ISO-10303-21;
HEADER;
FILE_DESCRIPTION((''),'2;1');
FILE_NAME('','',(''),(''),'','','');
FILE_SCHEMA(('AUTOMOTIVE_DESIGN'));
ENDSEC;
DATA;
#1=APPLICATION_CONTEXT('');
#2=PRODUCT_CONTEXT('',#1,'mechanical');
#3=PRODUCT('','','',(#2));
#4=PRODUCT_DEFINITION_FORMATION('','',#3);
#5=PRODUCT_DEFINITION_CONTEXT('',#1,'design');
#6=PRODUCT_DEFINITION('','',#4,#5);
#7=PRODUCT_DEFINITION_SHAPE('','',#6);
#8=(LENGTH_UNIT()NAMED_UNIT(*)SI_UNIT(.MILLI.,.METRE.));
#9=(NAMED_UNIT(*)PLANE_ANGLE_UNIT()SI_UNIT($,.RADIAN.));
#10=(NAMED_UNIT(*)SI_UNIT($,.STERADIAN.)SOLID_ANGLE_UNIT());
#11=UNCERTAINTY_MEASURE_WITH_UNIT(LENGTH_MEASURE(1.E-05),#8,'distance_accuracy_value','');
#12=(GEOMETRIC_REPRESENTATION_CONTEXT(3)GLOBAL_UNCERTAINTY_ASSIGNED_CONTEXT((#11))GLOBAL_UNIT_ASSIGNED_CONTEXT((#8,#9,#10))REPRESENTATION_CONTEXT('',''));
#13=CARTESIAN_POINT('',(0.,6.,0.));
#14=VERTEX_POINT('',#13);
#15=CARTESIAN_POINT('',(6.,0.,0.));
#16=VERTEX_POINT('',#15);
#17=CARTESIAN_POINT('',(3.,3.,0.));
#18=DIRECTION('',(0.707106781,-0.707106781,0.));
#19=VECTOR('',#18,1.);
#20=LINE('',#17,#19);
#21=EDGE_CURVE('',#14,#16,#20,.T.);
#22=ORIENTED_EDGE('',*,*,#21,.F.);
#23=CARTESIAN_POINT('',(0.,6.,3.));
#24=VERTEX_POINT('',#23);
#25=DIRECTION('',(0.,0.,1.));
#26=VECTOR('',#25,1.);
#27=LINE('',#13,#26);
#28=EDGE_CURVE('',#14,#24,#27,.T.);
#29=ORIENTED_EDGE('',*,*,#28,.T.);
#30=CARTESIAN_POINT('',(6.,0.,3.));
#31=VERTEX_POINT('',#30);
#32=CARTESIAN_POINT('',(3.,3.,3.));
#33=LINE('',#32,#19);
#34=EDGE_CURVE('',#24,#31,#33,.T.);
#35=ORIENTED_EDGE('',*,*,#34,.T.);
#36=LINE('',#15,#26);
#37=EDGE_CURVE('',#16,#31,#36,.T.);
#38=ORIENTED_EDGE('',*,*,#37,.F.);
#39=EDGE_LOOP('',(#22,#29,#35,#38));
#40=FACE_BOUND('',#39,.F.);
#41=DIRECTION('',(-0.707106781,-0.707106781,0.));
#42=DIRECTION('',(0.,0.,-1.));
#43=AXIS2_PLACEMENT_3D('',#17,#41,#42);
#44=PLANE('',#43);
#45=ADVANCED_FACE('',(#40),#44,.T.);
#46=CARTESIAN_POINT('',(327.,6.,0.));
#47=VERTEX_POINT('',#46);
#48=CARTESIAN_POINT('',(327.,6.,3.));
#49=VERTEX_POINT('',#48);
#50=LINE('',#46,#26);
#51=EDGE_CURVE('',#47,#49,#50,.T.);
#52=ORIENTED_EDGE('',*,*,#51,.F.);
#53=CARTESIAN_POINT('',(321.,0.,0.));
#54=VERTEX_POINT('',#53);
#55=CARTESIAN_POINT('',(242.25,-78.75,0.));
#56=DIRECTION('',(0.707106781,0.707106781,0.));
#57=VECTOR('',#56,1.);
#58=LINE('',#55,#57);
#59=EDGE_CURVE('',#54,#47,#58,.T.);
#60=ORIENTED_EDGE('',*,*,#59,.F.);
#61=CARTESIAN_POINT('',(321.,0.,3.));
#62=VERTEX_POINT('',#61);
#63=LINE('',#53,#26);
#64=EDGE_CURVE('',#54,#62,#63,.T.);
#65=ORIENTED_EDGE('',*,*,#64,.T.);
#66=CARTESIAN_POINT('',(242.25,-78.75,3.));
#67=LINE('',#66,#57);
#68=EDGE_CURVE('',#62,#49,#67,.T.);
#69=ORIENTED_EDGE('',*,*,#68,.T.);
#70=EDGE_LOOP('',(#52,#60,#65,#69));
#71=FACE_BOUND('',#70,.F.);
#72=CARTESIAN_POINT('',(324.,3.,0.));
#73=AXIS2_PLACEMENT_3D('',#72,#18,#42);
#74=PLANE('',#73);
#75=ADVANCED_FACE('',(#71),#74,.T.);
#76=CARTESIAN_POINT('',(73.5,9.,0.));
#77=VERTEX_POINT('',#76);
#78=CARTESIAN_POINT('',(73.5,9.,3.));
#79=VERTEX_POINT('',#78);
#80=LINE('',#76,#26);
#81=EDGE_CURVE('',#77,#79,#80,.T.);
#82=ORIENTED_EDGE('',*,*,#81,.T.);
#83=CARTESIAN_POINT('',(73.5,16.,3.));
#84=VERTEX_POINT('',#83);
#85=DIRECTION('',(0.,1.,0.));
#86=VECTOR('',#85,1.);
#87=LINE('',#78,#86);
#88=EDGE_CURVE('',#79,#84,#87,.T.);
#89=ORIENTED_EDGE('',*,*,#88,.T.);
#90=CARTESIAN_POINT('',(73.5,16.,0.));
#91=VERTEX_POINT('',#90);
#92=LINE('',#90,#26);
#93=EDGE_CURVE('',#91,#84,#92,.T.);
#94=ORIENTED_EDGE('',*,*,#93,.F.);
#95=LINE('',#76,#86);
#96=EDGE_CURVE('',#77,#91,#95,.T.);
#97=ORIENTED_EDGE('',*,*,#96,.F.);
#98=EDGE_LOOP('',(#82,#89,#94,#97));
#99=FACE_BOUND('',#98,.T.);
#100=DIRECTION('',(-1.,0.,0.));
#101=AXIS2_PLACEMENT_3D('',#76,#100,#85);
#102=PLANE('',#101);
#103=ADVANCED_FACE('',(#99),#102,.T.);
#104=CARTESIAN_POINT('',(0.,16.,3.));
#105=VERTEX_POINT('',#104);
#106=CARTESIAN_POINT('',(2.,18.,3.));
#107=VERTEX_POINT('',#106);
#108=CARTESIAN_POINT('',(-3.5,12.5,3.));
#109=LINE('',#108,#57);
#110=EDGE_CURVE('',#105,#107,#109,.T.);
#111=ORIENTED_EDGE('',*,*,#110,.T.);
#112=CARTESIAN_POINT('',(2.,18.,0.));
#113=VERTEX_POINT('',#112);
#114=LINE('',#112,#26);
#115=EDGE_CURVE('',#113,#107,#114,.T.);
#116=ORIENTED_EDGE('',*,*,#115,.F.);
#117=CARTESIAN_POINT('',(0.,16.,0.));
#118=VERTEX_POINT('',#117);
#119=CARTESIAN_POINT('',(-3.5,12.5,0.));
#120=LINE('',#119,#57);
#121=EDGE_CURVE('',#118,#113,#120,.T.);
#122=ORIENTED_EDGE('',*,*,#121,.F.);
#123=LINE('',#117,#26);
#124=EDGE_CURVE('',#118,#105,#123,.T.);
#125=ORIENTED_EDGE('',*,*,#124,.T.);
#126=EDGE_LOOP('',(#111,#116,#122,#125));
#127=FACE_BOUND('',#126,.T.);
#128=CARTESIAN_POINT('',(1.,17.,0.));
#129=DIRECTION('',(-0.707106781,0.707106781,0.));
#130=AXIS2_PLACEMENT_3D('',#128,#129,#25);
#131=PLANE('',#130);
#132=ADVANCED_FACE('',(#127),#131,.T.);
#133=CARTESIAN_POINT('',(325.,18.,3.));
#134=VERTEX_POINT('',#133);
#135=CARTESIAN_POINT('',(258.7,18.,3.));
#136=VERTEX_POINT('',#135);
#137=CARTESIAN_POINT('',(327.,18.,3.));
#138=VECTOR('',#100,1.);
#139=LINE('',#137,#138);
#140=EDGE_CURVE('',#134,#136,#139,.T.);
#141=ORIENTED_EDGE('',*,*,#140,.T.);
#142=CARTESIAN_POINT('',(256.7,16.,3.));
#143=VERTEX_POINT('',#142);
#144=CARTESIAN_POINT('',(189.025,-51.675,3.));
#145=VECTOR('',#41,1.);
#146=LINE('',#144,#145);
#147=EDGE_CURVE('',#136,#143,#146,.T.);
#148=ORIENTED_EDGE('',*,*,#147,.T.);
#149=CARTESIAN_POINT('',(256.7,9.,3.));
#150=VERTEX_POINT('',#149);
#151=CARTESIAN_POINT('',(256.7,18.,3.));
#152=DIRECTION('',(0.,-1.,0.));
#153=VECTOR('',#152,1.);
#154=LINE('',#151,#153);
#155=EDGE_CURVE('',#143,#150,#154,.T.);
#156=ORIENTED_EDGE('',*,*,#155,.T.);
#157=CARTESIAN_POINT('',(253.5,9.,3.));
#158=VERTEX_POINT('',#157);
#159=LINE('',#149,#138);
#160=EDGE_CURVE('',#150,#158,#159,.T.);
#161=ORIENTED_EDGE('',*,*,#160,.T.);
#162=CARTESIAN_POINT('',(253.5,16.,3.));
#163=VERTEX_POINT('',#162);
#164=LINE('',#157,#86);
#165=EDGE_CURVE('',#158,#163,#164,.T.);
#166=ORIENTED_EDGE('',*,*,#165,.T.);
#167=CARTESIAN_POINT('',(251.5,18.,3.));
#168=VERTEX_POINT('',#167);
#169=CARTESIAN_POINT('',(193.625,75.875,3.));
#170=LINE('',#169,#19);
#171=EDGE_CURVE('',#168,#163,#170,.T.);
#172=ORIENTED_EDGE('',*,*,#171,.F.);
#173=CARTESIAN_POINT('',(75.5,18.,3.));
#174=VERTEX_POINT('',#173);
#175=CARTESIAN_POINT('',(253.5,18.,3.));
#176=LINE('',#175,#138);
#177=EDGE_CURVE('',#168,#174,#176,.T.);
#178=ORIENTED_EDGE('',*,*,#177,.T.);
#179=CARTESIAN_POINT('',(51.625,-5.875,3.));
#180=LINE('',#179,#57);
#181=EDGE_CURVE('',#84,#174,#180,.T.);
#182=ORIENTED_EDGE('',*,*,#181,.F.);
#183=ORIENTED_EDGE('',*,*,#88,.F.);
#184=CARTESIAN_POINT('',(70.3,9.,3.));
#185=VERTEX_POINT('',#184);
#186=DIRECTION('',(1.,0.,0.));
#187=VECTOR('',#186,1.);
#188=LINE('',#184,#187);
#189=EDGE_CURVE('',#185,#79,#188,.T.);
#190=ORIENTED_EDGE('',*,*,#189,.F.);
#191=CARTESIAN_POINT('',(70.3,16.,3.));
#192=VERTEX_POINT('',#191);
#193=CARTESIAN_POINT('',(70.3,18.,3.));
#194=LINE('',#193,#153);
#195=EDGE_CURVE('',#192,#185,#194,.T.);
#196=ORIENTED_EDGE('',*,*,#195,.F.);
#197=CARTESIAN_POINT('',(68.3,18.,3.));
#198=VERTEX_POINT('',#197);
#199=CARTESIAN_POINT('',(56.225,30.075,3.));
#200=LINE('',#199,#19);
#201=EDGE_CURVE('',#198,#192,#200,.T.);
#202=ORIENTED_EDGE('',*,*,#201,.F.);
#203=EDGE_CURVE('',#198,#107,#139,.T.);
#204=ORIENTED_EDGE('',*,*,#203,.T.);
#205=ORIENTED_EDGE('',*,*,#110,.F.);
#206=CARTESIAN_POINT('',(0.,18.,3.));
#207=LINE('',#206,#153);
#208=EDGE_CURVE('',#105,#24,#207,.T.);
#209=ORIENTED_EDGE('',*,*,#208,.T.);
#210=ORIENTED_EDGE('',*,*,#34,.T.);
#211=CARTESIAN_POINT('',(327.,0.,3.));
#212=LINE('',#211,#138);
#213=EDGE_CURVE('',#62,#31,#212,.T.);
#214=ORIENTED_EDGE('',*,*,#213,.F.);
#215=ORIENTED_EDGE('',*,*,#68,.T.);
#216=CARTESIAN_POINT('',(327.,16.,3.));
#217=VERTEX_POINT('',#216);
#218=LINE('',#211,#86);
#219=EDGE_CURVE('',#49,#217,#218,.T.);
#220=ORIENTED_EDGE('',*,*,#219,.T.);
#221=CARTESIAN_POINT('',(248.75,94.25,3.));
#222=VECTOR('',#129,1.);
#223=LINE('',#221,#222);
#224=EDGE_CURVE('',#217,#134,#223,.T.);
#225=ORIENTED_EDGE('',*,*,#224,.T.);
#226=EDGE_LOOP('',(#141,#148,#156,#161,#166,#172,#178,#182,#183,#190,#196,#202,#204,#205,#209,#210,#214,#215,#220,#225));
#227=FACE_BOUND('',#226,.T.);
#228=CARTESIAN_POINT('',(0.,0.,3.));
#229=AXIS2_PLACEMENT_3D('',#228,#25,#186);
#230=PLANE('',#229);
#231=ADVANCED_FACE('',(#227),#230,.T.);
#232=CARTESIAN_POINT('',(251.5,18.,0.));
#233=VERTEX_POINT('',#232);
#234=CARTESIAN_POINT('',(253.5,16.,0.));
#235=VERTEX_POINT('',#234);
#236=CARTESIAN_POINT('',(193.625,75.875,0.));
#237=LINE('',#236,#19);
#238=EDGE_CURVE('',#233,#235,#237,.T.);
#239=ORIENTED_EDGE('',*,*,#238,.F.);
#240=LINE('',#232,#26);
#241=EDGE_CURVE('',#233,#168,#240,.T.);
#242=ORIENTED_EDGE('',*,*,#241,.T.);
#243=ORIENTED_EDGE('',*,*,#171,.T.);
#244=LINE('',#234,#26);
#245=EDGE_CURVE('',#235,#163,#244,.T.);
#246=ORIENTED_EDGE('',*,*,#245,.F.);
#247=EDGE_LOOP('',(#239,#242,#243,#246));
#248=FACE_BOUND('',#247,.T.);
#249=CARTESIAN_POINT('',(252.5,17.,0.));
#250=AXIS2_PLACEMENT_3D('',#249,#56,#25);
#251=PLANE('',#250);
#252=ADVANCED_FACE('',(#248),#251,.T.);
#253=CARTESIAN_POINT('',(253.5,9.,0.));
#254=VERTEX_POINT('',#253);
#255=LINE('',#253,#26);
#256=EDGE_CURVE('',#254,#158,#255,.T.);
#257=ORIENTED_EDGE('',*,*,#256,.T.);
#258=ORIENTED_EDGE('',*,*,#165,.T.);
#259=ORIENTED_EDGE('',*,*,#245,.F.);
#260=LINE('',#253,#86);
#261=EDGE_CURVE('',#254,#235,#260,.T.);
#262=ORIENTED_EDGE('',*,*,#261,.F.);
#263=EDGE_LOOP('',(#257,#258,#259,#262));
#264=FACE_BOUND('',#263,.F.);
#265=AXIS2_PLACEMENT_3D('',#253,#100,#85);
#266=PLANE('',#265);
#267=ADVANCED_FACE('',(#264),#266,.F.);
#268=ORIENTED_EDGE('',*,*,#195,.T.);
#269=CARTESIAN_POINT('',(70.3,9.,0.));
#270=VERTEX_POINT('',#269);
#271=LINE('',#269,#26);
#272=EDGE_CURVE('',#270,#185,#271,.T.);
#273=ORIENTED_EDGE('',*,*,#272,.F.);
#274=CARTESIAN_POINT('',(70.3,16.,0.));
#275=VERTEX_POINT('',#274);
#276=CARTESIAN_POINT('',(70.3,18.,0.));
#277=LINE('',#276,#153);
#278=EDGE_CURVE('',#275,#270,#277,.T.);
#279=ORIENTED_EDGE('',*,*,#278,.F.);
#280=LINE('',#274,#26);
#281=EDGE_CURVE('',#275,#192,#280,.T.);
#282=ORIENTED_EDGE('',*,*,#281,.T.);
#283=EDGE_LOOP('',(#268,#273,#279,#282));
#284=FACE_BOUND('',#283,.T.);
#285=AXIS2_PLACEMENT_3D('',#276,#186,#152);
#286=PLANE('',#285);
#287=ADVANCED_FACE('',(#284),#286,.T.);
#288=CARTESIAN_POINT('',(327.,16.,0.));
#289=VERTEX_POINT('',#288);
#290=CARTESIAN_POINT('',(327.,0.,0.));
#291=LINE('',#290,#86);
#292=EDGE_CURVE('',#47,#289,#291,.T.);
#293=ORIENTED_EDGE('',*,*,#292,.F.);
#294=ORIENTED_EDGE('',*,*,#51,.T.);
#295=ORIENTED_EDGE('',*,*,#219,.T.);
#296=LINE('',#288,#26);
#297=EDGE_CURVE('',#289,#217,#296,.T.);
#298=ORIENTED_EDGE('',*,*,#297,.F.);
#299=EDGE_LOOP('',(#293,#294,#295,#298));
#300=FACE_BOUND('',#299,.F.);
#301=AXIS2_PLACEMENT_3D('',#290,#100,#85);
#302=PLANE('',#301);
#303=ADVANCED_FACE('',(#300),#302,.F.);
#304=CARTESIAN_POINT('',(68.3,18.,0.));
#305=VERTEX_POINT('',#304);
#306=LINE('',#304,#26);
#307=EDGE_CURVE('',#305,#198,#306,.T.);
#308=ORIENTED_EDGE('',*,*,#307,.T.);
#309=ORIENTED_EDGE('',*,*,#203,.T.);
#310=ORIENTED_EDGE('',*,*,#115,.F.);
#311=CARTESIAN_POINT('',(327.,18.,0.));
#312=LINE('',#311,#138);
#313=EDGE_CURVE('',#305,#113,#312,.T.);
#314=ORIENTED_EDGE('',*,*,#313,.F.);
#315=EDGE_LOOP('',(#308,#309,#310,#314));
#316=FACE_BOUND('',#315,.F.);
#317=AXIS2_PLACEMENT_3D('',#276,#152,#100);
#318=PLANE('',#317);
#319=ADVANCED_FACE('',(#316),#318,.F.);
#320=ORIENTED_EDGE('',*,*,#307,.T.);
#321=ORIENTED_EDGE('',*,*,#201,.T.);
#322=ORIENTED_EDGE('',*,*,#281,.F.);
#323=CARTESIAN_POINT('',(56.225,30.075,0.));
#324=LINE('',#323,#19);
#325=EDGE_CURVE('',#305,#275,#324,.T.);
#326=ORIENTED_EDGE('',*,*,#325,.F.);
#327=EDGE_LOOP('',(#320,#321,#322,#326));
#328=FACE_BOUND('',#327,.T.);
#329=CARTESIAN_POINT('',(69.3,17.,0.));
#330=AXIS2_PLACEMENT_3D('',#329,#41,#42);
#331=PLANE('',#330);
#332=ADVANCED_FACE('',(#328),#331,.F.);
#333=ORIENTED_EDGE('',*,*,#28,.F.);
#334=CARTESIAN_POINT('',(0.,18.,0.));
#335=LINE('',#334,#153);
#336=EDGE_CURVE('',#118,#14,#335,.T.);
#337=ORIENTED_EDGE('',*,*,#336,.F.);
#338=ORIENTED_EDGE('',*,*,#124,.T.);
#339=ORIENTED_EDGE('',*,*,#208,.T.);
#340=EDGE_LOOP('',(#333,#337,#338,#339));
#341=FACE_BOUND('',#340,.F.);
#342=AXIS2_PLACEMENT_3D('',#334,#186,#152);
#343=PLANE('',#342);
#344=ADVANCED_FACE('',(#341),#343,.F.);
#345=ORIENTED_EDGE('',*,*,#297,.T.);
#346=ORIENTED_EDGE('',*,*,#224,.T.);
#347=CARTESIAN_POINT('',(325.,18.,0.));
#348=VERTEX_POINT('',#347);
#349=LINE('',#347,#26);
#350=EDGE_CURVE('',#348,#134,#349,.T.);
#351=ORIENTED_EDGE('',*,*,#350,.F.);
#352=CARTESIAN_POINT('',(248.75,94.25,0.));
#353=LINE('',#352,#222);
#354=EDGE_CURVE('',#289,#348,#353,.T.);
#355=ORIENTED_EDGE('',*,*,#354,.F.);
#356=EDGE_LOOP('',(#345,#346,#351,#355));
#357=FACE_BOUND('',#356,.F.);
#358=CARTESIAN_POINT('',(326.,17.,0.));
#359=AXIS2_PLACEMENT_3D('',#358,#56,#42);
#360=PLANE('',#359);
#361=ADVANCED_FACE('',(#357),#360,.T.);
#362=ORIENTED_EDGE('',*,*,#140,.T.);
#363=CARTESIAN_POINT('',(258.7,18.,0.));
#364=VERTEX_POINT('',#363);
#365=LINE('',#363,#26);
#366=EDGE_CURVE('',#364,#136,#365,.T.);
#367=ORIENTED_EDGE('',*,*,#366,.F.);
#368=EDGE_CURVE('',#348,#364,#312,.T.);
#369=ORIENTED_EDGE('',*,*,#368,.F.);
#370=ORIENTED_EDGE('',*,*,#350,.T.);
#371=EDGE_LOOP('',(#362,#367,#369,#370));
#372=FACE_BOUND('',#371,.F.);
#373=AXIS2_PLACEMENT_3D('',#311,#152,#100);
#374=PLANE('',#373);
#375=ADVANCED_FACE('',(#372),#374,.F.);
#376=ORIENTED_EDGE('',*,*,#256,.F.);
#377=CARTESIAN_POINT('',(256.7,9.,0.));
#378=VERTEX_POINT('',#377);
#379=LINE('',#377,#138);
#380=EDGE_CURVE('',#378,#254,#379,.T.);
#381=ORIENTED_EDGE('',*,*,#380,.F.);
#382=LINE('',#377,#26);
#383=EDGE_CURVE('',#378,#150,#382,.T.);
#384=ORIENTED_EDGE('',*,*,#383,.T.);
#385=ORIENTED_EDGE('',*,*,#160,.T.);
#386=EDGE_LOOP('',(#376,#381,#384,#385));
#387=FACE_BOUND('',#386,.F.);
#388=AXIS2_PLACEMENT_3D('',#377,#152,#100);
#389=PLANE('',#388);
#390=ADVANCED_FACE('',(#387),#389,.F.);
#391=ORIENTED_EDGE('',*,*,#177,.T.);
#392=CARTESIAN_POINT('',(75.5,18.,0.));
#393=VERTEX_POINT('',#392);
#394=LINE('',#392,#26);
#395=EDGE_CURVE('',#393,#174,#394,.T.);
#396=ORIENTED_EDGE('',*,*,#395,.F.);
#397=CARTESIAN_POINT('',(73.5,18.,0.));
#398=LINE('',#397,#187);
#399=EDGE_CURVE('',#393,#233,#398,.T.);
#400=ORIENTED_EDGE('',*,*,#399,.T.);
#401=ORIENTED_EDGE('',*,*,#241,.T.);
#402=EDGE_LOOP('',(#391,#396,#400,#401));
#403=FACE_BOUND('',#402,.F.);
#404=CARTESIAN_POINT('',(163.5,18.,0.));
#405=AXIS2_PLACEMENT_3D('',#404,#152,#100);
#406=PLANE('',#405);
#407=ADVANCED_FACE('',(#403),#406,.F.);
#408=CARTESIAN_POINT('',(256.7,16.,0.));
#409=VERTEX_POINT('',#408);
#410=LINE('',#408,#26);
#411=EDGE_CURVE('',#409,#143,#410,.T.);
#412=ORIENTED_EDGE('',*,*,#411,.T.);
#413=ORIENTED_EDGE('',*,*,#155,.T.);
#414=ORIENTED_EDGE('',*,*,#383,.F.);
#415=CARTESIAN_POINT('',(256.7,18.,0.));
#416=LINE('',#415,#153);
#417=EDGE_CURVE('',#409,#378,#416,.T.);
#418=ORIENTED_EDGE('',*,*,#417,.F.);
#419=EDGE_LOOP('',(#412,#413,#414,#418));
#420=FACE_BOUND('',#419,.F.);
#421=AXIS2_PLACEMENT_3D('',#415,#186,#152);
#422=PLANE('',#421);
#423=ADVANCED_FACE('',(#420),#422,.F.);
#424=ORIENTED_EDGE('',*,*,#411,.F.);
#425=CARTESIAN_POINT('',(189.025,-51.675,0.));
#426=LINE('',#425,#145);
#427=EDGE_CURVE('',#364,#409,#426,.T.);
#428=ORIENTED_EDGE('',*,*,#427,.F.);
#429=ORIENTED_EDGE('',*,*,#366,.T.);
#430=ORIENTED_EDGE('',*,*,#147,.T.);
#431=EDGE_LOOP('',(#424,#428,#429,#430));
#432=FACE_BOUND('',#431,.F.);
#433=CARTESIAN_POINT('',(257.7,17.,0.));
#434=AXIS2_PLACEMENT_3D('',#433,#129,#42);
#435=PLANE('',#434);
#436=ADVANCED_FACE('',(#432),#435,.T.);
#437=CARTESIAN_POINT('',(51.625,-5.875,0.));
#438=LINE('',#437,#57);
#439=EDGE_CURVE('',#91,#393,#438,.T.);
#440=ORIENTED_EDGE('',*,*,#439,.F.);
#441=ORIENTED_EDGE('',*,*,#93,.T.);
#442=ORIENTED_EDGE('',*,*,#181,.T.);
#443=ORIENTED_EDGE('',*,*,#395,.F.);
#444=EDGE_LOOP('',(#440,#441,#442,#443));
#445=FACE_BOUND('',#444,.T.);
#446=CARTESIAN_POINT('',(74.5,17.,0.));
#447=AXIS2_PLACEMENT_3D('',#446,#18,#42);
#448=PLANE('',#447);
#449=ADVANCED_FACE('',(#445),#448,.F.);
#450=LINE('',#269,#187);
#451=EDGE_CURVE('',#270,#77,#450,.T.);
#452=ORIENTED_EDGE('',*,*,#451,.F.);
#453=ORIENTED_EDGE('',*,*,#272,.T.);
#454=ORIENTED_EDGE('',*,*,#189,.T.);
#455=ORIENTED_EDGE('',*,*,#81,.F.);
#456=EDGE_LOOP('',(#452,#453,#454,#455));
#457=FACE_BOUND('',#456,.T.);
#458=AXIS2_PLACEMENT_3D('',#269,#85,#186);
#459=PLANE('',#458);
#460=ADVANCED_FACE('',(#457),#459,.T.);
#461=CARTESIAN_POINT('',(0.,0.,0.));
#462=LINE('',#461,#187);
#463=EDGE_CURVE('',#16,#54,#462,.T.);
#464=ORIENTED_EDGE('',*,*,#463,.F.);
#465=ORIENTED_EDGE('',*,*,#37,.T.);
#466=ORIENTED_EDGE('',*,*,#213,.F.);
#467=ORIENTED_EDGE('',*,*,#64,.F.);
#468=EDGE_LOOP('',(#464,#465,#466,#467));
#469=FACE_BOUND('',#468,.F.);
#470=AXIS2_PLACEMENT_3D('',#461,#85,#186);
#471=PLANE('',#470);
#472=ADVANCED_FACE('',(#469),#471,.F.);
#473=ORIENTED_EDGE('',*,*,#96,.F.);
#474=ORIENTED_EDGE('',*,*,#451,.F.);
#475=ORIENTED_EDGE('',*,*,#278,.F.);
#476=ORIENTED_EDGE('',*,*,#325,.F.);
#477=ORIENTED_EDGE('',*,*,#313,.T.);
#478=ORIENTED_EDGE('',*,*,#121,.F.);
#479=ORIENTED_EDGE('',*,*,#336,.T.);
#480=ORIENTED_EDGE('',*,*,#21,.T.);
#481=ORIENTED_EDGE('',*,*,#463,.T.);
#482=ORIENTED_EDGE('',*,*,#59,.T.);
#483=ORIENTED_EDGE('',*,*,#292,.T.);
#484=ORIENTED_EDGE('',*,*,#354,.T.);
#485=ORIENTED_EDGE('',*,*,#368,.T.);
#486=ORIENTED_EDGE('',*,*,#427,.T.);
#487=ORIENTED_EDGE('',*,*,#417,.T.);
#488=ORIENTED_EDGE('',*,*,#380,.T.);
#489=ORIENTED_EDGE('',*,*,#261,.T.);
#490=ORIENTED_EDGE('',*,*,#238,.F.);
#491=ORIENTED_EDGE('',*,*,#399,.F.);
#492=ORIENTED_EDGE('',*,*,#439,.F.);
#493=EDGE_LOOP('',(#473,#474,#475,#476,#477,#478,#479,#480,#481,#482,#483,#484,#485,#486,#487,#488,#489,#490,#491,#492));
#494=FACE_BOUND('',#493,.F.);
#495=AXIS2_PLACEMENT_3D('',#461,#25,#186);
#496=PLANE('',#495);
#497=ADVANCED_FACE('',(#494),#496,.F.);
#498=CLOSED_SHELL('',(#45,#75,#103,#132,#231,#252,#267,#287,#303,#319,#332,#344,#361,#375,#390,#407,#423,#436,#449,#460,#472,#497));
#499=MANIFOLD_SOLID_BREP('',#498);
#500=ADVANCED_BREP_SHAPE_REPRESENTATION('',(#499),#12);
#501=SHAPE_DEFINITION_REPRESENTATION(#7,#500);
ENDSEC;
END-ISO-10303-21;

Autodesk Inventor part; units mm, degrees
ref_plane "YZ Plane" through (0, 0, 0) normal (1, 0, 0) x (0, 1, 0)
ref_plane "XZ Plane" through (0, 0, 0) normal (0, 1, 0) x (-1, 0, 0)
ref_plane "XY Plane" through (0, 0, 0) normal (0, 0, 1) x (1, 0, 0)
sketch "Sketch1" plane through (0, 0, 0) normal (0, 0, 1) x (1, 0, 0)
  line L0 (0, 0) -> (327, 0)
  line L1 (327, 0) -> (327, 18)
  line L2 (327, 18) -> (0, 18)
  line L3 (0, 18) -> (0, 0)
  line L4 (163.5, 18) -> (163.5, 0)
  line L5 (73.5, 18) -> (70.3, 18)
  line L6 (70.3, 18) -> (70.3, 9)
  line L7 (70.3, 9) -> (73.5, 9)
  line L8 (73.5, 9) -> (73.5, 18)
  line L9 (256.7, 18) -> (256.7, 9)
  line L10 (256.7, 9) -> (253.5, 9)
  line L11 (253.5, 9) -> (253.5, 18)
  dimension "d0" = 327
  dimension "d1" = 18
  dimension "d2" = 3.2
  dimension "d3" = 9
  dimension "d4" = 180
extrude "Plate1" add sketch "Sketch1" along normal blind 3 contours L3 L2 L6 L7 L8 L4 L0 | L4 L2 L11 L10 L9 L1 L0
chamfer "Corner Chamfer1" distance 6 angle 45 2 edges at (0, 0, 1.5) (327, 0, 1.5)
chamfer "Corner Chamfer2" distance 2 angle 45 6 edges at (327, 18, 1.5) (256.7, 18, 1.5) (253.5, 18, 1.5) (73.5, 18, 1.5) (70.3, 18, 1.5) (0, 18, 1.5)
equation "\"d5\" = Thickness"
equation "\"BendRadius\" = Thickness"
equation "\"BendReliefWidth\" = Thickness"
equation "\"BendReliefDepth\" = 0.5 * Thickness"
equation "\"CornerReliefSize\" = 4 * Thickness"
equation "\"MinimumRemnant\" = 2 * Thickness"
equation "\"TransitionRadius\" = BendRadius"
equation "\"JacobiRadiusSize\" = BendRadius"
equation "\"GapSize\" = Thickness"
equation "\"Thickness\" = 3"
properties part number "foot support"
